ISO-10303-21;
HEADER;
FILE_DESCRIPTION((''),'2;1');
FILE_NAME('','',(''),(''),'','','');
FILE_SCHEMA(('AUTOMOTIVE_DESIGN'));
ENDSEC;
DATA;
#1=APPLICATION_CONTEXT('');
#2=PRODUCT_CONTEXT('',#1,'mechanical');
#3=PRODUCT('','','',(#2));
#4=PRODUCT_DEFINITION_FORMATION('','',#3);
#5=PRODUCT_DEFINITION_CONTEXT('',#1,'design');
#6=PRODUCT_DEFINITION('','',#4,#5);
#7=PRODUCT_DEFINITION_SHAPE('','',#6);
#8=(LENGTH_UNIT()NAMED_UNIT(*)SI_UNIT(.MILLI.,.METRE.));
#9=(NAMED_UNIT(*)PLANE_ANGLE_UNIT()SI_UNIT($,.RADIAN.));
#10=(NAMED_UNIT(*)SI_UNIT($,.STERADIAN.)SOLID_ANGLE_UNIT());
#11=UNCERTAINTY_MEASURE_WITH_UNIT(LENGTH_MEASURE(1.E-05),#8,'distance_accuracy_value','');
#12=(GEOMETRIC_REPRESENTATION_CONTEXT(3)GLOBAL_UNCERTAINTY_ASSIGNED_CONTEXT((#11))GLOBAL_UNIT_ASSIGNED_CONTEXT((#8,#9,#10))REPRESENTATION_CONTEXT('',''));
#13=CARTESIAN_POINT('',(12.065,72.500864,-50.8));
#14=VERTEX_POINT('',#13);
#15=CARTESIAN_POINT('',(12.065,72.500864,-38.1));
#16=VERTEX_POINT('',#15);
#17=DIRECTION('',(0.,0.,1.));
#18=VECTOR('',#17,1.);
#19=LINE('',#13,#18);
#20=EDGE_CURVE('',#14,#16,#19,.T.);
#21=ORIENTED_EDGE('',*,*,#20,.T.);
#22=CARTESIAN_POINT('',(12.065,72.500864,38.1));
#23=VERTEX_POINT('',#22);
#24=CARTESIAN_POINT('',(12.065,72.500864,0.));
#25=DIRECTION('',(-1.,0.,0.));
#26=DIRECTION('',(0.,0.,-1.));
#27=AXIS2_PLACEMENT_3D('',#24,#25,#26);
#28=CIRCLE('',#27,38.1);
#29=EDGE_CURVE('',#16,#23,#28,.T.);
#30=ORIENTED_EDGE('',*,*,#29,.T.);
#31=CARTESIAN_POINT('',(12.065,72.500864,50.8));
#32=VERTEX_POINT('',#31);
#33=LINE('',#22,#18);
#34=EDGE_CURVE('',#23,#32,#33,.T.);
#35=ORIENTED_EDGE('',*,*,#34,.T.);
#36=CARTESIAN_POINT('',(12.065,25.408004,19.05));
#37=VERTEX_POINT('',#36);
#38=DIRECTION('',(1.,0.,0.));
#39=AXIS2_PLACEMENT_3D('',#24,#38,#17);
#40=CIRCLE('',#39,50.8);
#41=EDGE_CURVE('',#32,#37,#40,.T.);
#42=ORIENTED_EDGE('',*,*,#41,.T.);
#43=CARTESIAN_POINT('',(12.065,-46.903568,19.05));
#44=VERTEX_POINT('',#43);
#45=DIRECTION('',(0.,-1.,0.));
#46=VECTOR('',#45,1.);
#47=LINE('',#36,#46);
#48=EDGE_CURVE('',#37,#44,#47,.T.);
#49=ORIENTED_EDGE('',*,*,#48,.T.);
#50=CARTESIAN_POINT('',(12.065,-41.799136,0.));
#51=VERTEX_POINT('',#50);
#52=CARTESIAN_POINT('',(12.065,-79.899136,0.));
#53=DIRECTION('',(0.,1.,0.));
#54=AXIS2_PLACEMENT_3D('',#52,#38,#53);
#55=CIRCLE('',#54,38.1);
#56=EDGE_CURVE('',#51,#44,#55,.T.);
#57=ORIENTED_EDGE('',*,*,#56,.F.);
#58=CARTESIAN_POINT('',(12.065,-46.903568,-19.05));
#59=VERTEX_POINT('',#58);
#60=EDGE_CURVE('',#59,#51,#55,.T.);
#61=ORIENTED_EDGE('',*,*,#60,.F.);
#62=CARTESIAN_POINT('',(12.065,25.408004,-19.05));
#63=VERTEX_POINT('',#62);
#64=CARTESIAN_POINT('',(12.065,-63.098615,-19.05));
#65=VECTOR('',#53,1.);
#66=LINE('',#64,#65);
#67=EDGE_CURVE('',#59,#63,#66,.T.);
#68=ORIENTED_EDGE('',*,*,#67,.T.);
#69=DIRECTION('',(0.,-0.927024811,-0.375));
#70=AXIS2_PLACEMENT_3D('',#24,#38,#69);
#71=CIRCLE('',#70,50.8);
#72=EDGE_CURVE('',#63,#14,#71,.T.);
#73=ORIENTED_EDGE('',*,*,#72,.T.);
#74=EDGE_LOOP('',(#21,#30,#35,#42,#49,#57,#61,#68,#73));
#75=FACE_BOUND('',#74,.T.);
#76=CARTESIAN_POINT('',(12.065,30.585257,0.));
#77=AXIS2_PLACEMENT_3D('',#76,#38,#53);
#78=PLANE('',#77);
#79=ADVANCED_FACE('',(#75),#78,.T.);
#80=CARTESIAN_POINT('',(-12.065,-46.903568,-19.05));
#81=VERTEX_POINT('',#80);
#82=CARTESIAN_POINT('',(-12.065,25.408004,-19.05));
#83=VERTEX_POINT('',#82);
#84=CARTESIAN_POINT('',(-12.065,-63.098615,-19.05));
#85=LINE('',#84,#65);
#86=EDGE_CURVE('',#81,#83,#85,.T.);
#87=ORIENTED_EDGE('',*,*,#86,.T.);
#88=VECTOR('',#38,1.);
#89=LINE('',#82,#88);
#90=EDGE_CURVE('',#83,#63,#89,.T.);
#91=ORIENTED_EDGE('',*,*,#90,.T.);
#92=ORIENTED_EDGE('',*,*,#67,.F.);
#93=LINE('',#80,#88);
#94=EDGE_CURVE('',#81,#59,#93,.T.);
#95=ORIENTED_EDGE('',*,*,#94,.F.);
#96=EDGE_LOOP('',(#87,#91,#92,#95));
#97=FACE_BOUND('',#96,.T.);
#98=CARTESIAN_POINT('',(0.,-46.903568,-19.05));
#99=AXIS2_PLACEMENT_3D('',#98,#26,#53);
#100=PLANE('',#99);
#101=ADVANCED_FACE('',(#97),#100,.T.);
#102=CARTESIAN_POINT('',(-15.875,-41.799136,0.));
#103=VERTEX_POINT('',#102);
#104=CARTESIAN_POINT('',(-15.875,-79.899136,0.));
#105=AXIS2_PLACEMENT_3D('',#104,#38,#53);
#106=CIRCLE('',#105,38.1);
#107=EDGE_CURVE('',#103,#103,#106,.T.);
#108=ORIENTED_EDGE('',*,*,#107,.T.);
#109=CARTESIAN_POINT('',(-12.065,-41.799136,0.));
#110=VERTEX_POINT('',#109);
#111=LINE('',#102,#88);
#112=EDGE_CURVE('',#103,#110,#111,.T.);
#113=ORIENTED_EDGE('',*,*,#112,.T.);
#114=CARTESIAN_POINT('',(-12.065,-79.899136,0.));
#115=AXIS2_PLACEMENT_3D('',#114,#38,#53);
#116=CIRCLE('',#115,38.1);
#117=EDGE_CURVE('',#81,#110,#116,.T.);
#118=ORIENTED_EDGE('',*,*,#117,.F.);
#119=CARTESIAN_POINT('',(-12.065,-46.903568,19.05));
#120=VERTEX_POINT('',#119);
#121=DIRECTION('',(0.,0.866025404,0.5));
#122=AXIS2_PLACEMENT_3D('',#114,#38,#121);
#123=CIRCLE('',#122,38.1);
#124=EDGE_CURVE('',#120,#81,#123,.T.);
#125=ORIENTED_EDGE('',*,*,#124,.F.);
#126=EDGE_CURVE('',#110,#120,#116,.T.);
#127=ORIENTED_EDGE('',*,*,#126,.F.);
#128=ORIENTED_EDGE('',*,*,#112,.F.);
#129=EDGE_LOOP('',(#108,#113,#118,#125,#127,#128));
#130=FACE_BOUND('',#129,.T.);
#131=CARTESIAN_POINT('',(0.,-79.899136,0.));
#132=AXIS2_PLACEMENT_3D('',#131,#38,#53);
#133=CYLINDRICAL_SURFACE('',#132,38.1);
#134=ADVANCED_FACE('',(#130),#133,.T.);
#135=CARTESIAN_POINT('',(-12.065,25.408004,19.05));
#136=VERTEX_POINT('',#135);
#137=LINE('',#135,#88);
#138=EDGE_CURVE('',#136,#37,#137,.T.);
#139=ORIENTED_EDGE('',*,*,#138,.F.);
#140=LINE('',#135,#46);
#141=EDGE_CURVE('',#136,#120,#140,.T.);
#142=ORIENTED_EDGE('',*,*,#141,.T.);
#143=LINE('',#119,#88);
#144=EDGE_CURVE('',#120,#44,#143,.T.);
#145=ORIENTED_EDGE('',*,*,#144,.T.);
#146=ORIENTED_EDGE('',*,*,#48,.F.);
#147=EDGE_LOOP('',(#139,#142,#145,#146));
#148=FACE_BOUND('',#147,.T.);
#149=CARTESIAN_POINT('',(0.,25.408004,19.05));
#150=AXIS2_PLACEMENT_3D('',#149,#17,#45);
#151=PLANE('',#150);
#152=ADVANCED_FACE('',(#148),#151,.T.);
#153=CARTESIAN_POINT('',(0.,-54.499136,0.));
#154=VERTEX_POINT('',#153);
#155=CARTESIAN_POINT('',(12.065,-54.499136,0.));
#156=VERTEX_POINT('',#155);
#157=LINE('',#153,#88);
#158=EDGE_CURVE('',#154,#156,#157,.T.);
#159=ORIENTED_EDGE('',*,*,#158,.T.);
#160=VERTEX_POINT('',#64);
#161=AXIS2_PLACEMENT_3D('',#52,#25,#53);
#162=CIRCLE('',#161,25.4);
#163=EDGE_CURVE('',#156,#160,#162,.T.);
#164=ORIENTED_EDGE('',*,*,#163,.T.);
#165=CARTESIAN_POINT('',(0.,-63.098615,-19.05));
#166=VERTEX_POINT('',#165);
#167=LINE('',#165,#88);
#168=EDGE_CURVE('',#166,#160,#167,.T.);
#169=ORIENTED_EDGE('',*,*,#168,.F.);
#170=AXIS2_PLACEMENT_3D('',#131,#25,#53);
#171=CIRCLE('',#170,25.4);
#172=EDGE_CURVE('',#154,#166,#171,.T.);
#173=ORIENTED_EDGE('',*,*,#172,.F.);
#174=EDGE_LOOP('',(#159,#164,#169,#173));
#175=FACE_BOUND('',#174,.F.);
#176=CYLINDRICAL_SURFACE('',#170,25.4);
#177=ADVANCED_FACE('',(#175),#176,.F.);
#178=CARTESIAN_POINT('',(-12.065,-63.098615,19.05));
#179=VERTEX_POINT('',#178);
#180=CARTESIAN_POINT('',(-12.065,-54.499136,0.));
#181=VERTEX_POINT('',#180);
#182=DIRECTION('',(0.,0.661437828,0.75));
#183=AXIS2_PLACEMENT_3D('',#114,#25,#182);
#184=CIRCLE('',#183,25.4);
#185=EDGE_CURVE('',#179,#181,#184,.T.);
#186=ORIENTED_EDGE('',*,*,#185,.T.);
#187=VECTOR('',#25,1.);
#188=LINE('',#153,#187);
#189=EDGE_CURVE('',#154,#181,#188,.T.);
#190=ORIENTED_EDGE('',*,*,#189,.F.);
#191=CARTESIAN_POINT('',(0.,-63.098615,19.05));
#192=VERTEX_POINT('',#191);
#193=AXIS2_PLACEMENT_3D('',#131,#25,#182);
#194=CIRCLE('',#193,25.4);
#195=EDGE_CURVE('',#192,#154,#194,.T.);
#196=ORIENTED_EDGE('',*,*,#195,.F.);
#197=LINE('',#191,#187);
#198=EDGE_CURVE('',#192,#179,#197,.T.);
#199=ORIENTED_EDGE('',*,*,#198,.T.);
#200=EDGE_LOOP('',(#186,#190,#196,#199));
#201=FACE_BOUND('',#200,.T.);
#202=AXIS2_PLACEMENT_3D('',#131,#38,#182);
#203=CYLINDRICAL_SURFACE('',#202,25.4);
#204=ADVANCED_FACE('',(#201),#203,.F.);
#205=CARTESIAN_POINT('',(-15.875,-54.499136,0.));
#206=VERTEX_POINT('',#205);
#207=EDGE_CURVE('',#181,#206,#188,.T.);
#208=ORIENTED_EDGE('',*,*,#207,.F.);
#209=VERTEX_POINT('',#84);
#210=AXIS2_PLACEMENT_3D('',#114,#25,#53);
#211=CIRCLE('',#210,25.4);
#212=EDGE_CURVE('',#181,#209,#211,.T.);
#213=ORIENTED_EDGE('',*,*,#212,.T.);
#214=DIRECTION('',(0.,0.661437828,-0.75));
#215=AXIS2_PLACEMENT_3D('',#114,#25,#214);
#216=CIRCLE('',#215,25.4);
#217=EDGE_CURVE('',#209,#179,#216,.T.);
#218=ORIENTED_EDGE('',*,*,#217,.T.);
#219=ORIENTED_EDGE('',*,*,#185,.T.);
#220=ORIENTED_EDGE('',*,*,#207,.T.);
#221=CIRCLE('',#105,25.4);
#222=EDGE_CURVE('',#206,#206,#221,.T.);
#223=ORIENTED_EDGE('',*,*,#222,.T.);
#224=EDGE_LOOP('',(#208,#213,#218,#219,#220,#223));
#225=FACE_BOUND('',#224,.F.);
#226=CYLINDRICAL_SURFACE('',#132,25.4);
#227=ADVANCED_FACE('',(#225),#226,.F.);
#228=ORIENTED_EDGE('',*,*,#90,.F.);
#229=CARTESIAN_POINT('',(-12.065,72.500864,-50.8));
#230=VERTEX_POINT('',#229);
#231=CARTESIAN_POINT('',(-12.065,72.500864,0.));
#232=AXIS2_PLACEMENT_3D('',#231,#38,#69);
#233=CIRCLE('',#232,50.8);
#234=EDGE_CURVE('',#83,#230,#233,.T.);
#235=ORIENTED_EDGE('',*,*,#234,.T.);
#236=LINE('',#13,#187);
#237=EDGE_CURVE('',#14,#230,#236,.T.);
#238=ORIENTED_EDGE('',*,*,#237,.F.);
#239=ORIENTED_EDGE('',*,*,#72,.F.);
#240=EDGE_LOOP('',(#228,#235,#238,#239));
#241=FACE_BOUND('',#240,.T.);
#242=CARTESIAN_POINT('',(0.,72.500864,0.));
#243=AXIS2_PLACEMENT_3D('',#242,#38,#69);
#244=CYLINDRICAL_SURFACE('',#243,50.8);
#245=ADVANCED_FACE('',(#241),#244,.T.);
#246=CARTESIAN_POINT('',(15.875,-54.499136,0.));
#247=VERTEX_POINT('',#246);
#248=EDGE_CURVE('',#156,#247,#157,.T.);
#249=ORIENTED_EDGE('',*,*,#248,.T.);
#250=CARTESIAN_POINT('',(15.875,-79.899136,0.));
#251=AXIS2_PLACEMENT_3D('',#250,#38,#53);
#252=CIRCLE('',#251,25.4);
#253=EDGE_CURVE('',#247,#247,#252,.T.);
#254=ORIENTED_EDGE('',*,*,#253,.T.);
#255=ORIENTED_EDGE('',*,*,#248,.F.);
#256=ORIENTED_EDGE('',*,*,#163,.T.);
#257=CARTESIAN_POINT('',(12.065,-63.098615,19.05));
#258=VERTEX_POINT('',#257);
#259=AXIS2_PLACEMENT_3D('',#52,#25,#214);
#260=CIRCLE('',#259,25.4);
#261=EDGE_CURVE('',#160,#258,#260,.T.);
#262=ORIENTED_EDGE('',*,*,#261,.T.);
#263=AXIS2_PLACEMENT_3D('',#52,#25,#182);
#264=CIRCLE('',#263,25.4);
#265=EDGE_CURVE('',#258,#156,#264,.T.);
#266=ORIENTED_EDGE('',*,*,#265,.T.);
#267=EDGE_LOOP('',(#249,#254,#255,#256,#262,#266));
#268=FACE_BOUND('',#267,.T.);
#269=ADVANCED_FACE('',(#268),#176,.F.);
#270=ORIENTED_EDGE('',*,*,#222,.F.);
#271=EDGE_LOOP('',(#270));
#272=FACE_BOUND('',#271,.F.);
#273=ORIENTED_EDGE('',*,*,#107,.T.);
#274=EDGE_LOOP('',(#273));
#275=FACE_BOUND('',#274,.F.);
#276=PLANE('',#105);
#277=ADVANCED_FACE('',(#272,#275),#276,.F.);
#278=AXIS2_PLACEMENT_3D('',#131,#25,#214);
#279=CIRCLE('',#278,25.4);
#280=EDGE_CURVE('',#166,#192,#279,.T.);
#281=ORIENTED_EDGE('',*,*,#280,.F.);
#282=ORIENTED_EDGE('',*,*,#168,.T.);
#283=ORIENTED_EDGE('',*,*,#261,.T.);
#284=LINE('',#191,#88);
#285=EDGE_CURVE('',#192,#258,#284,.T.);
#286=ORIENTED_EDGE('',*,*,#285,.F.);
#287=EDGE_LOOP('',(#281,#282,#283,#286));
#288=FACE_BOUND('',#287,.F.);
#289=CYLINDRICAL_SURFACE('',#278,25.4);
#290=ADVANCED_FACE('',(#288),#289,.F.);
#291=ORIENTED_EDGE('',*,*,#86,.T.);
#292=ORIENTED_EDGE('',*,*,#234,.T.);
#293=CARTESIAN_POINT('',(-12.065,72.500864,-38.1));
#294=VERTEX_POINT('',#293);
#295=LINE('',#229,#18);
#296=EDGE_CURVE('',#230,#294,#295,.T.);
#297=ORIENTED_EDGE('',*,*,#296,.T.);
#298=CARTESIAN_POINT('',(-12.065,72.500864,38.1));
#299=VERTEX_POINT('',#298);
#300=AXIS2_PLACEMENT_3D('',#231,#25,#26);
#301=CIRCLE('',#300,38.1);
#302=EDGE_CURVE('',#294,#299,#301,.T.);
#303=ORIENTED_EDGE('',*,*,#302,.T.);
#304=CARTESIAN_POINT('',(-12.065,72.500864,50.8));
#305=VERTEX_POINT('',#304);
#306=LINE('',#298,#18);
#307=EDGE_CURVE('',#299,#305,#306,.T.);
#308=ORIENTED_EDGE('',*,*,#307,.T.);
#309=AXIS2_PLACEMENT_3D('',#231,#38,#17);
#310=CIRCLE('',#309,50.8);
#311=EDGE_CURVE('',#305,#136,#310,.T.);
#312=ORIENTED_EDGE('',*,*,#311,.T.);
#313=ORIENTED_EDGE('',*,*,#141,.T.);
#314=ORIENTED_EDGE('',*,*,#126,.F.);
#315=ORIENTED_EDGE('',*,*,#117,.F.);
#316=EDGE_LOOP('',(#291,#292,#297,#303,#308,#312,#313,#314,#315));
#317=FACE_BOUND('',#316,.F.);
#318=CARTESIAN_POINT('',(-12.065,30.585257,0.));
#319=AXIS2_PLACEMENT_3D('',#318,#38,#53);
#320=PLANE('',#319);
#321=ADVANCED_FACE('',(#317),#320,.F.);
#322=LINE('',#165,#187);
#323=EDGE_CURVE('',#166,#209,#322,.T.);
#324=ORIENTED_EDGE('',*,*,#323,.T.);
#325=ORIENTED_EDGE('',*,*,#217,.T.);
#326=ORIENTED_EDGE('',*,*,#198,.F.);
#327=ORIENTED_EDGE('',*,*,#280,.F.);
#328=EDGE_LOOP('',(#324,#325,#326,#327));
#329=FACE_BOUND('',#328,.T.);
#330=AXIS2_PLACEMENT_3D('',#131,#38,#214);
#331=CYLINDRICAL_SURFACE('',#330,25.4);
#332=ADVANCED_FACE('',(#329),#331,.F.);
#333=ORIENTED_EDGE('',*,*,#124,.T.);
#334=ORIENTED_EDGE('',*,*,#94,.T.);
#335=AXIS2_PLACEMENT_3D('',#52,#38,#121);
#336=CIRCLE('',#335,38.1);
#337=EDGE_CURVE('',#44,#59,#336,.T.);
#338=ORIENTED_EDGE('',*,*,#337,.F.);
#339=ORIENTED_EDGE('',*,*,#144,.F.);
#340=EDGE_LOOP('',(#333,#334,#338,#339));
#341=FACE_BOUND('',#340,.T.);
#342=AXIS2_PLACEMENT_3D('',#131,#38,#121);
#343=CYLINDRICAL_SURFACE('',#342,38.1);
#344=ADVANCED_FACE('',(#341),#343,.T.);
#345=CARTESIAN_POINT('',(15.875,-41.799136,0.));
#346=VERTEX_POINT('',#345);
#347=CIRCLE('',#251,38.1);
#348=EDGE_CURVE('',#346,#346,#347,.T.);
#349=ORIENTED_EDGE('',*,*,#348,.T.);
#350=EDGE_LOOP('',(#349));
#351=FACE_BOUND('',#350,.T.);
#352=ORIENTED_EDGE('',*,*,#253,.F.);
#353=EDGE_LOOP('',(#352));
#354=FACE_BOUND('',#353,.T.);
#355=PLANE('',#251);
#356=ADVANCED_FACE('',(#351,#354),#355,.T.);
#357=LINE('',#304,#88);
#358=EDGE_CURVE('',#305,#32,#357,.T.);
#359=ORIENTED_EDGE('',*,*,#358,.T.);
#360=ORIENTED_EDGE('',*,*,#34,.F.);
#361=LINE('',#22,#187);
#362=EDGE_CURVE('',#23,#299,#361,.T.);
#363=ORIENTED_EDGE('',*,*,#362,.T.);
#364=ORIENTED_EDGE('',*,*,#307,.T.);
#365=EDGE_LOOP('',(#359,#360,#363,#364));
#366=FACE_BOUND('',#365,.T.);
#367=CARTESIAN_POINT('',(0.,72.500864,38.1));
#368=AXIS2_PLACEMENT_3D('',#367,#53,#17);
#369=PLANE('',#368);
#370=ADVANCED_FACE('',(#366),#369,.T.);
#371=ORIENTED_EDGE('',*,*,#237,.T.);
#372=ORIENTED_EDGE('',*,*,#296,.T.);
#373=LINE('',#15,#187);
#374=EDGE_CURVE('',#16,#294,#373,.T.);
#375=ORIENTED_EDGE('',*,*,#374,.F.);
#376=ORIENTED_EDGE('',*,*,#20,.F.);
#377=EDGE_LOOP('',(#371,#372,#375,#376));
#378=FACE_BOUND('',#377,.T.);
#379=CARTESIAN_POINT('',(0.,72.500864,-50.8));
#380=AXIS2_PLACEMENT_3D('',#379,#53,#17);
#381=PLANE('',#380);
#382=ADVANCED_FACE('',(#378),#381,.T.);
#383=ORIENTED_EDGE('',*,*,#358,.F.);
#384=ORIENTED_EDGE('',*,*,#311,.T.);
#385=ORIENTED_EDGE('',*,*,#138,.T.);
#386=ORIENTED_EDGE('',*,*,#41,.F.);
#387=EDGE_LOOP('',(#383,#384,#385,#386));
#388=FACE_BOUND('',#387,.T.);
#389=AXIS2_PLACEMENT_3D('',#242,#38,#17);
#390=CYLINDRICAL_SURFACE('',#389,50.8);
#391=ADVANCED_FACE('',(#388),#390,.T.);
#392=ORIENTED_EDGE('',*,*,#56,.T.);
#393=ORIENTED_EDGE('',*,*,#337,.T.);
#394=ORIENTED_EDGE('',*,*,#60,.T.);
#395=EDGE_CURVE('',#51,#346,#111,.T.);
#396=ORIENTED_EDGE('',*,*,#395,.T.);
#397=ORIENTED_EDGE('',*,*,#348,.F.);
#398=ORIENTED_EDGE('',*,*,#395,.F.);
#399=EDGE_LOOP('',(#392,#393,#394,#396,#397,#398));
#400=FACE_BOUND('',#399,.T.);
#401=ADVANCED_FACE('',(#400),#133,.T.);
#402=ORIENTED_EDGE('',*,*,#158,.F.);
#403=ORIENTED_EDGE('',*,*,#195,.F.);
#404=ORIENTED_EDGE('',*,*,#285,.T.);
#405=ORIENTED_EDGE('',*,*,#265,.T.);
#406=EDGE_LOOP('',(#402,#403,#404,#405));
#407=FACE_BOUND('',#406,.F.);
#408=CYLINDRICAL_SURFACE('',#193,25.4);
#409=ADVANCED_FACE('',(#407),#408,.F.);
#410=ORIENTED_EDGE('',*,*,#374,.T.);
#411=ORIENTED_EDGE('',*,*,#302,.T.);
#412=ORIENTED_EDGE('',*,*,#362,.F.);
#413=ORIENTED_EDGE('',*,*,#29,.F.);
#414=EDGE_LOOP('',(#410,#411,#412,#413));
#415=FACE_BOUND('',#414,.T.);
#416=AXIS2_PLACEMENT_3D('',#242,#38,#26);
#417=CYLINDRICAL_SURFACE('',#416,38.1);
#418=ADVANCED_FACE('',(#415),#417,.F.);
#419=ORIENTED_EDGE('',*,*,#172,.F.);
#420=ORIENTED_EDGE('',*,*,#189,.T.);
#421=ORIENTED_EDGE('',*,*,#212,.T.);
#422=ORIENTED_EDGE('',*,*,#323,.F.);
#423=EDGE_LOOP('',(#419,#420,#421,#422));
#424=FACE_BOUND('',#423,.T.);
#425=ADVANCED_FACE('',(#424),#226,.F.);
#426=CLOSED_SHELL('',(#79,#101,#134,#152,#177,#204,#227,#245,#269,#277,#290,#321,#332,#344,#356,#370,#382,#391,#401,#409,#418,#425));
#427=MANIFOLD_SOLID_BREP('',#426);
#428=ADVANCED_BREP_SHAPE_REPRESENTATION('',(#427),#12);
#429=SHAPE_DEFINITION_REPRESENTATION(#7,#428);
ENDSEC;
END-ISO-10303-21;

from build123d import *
from build123d import SkipClean  # not in build123d's __all__

# Parameters (mm, degrees)
F1_DEPTH = 12.065
F2_R     = 38.1
F2_R_2   = 25.4
F3_DEPTH = 15.875


with BuildPart() as f1:
    # F0 (on Right) → F1 (new body, symmetric)
    with BuildSketch(Plane.YZ):
        with BuildLine():
            ThreePointArc((39.5052965482, -19.05), (34.4008644324, 0), (39.5052965482, 19.05))
            Line((39.5052965482, 19.05), (25.4080040394, 19.05))
            ThreePointArc((25.4080040394, 19.05), (21.7008644324, 0), (25.4080040394, -19.05))
            Line((25.4080040394, -19.05), (39.5052965482, -19.05))
        make_face()
        with BuildLine():
            Line((25.4080040394, 19.05), (39.5052965482, 19.05))
            ThreePointArc((39.5052965482, 19.05), (53.4508644324, 32.9955678842), (72.5008644324, 38.1))
            Line((72.5008644324, 38.1), (72.5008644324, 50.8))
            ThreePointArc((72.5008644324, 50.8), (44.1028011182, 42.1211348375), (25.4080040394, 19.05))
        make_face()
        with BuildLine():
            ThreePointArc((25.4080040394, -19.05), (21.7008644324, 0), (25.4080040394, 19.05))
            Line((25.4080040394, 19.05), (-46.9035676834, 19.05))
            ThreePointArc((-46.9035676834, 19.05), (-43.097361586, 9.8610056184), (-41.7991355676, 0))
            ThreePointArc((-41.7991355676, 0), (-43.097361586, -9.8610056184), (-46.9035676834, -19.05))
            Line((-46.9035676834, -19.05), (25.4080040394, -19.05))
        make_face()
        with BuildLine():
            ThreePointArc((72.5008644324, -38.1), (53.4508644324, -32.9955678842), (39.5052965482, -19.05))
            Line((39.5052965482, -19.05), (25.4080040394, -19.05))
            ThreePointArc((25.4080040394, -19.05), (44.1028011182, -42.1211348375), (72.5008644324, -50.8))
            Line((72.5008644324, -50.8), (72.5008644324, -38.1))
        make_face()
        with BuildLine():
            ThreePointArc((-41.7991355676, 0), (-43.097361586, 9.8610056184), (-46.9035676834, 19.05))
            Line((-46.9035676834, 19.05), (-63.0986147423, 19.05))
            ThreePointArc((-63.0986147423, 19.05), (-56.7486147423, 10.4505208253), (-54.4991355676, 0))
            ThreePointArc((-54.4991355676, 0), (-56.7486147423, -10.4505208253), (-63.0986147423, -19.05))
            Line((-63.0986147423, -19.05), (-46.9035676834, -19.05))
            ThreePointArc((-46.9035676834, -19.05), (-43.097361586, -9.8610056184), (-41.7991355676, 0))
        make_face()
        with BuildLine():
            Line((-63.0986147423, 19.05), (-46.9035676834, 19.05))
            ThreePointArc((-46.9035676834, 19.05), (-117.9991355676, 0), (-46.9035676834, -19.05))
            Line((-46.9035676834, -19.05), (-63.0986147423, -19.05))
            ThreePointArc((-63.0986147423, -19.05), (-105.2991355676, 0), (-63.0986147423, 19.05))
        make_face()
    extrude(amount=F1_DEPTH, both=True)

    # F2 (on Right) → F3 (join, symmetric)
    with BuildSketch(Plane.YZ):
        with Locations((-79.8991355676, 0)):
            Circle(F2_R)
        with Locations((-79.8991355676, 0)):
            Circle(F2_R_2, mode=Mode.SUBTRACT)
    with SkipClean():  # cleaning this boolean's faces spoils the solid; the shape is the same uncleaned
        extrude(amount=F3_DEPTH, both=True)


solid = f1.part
